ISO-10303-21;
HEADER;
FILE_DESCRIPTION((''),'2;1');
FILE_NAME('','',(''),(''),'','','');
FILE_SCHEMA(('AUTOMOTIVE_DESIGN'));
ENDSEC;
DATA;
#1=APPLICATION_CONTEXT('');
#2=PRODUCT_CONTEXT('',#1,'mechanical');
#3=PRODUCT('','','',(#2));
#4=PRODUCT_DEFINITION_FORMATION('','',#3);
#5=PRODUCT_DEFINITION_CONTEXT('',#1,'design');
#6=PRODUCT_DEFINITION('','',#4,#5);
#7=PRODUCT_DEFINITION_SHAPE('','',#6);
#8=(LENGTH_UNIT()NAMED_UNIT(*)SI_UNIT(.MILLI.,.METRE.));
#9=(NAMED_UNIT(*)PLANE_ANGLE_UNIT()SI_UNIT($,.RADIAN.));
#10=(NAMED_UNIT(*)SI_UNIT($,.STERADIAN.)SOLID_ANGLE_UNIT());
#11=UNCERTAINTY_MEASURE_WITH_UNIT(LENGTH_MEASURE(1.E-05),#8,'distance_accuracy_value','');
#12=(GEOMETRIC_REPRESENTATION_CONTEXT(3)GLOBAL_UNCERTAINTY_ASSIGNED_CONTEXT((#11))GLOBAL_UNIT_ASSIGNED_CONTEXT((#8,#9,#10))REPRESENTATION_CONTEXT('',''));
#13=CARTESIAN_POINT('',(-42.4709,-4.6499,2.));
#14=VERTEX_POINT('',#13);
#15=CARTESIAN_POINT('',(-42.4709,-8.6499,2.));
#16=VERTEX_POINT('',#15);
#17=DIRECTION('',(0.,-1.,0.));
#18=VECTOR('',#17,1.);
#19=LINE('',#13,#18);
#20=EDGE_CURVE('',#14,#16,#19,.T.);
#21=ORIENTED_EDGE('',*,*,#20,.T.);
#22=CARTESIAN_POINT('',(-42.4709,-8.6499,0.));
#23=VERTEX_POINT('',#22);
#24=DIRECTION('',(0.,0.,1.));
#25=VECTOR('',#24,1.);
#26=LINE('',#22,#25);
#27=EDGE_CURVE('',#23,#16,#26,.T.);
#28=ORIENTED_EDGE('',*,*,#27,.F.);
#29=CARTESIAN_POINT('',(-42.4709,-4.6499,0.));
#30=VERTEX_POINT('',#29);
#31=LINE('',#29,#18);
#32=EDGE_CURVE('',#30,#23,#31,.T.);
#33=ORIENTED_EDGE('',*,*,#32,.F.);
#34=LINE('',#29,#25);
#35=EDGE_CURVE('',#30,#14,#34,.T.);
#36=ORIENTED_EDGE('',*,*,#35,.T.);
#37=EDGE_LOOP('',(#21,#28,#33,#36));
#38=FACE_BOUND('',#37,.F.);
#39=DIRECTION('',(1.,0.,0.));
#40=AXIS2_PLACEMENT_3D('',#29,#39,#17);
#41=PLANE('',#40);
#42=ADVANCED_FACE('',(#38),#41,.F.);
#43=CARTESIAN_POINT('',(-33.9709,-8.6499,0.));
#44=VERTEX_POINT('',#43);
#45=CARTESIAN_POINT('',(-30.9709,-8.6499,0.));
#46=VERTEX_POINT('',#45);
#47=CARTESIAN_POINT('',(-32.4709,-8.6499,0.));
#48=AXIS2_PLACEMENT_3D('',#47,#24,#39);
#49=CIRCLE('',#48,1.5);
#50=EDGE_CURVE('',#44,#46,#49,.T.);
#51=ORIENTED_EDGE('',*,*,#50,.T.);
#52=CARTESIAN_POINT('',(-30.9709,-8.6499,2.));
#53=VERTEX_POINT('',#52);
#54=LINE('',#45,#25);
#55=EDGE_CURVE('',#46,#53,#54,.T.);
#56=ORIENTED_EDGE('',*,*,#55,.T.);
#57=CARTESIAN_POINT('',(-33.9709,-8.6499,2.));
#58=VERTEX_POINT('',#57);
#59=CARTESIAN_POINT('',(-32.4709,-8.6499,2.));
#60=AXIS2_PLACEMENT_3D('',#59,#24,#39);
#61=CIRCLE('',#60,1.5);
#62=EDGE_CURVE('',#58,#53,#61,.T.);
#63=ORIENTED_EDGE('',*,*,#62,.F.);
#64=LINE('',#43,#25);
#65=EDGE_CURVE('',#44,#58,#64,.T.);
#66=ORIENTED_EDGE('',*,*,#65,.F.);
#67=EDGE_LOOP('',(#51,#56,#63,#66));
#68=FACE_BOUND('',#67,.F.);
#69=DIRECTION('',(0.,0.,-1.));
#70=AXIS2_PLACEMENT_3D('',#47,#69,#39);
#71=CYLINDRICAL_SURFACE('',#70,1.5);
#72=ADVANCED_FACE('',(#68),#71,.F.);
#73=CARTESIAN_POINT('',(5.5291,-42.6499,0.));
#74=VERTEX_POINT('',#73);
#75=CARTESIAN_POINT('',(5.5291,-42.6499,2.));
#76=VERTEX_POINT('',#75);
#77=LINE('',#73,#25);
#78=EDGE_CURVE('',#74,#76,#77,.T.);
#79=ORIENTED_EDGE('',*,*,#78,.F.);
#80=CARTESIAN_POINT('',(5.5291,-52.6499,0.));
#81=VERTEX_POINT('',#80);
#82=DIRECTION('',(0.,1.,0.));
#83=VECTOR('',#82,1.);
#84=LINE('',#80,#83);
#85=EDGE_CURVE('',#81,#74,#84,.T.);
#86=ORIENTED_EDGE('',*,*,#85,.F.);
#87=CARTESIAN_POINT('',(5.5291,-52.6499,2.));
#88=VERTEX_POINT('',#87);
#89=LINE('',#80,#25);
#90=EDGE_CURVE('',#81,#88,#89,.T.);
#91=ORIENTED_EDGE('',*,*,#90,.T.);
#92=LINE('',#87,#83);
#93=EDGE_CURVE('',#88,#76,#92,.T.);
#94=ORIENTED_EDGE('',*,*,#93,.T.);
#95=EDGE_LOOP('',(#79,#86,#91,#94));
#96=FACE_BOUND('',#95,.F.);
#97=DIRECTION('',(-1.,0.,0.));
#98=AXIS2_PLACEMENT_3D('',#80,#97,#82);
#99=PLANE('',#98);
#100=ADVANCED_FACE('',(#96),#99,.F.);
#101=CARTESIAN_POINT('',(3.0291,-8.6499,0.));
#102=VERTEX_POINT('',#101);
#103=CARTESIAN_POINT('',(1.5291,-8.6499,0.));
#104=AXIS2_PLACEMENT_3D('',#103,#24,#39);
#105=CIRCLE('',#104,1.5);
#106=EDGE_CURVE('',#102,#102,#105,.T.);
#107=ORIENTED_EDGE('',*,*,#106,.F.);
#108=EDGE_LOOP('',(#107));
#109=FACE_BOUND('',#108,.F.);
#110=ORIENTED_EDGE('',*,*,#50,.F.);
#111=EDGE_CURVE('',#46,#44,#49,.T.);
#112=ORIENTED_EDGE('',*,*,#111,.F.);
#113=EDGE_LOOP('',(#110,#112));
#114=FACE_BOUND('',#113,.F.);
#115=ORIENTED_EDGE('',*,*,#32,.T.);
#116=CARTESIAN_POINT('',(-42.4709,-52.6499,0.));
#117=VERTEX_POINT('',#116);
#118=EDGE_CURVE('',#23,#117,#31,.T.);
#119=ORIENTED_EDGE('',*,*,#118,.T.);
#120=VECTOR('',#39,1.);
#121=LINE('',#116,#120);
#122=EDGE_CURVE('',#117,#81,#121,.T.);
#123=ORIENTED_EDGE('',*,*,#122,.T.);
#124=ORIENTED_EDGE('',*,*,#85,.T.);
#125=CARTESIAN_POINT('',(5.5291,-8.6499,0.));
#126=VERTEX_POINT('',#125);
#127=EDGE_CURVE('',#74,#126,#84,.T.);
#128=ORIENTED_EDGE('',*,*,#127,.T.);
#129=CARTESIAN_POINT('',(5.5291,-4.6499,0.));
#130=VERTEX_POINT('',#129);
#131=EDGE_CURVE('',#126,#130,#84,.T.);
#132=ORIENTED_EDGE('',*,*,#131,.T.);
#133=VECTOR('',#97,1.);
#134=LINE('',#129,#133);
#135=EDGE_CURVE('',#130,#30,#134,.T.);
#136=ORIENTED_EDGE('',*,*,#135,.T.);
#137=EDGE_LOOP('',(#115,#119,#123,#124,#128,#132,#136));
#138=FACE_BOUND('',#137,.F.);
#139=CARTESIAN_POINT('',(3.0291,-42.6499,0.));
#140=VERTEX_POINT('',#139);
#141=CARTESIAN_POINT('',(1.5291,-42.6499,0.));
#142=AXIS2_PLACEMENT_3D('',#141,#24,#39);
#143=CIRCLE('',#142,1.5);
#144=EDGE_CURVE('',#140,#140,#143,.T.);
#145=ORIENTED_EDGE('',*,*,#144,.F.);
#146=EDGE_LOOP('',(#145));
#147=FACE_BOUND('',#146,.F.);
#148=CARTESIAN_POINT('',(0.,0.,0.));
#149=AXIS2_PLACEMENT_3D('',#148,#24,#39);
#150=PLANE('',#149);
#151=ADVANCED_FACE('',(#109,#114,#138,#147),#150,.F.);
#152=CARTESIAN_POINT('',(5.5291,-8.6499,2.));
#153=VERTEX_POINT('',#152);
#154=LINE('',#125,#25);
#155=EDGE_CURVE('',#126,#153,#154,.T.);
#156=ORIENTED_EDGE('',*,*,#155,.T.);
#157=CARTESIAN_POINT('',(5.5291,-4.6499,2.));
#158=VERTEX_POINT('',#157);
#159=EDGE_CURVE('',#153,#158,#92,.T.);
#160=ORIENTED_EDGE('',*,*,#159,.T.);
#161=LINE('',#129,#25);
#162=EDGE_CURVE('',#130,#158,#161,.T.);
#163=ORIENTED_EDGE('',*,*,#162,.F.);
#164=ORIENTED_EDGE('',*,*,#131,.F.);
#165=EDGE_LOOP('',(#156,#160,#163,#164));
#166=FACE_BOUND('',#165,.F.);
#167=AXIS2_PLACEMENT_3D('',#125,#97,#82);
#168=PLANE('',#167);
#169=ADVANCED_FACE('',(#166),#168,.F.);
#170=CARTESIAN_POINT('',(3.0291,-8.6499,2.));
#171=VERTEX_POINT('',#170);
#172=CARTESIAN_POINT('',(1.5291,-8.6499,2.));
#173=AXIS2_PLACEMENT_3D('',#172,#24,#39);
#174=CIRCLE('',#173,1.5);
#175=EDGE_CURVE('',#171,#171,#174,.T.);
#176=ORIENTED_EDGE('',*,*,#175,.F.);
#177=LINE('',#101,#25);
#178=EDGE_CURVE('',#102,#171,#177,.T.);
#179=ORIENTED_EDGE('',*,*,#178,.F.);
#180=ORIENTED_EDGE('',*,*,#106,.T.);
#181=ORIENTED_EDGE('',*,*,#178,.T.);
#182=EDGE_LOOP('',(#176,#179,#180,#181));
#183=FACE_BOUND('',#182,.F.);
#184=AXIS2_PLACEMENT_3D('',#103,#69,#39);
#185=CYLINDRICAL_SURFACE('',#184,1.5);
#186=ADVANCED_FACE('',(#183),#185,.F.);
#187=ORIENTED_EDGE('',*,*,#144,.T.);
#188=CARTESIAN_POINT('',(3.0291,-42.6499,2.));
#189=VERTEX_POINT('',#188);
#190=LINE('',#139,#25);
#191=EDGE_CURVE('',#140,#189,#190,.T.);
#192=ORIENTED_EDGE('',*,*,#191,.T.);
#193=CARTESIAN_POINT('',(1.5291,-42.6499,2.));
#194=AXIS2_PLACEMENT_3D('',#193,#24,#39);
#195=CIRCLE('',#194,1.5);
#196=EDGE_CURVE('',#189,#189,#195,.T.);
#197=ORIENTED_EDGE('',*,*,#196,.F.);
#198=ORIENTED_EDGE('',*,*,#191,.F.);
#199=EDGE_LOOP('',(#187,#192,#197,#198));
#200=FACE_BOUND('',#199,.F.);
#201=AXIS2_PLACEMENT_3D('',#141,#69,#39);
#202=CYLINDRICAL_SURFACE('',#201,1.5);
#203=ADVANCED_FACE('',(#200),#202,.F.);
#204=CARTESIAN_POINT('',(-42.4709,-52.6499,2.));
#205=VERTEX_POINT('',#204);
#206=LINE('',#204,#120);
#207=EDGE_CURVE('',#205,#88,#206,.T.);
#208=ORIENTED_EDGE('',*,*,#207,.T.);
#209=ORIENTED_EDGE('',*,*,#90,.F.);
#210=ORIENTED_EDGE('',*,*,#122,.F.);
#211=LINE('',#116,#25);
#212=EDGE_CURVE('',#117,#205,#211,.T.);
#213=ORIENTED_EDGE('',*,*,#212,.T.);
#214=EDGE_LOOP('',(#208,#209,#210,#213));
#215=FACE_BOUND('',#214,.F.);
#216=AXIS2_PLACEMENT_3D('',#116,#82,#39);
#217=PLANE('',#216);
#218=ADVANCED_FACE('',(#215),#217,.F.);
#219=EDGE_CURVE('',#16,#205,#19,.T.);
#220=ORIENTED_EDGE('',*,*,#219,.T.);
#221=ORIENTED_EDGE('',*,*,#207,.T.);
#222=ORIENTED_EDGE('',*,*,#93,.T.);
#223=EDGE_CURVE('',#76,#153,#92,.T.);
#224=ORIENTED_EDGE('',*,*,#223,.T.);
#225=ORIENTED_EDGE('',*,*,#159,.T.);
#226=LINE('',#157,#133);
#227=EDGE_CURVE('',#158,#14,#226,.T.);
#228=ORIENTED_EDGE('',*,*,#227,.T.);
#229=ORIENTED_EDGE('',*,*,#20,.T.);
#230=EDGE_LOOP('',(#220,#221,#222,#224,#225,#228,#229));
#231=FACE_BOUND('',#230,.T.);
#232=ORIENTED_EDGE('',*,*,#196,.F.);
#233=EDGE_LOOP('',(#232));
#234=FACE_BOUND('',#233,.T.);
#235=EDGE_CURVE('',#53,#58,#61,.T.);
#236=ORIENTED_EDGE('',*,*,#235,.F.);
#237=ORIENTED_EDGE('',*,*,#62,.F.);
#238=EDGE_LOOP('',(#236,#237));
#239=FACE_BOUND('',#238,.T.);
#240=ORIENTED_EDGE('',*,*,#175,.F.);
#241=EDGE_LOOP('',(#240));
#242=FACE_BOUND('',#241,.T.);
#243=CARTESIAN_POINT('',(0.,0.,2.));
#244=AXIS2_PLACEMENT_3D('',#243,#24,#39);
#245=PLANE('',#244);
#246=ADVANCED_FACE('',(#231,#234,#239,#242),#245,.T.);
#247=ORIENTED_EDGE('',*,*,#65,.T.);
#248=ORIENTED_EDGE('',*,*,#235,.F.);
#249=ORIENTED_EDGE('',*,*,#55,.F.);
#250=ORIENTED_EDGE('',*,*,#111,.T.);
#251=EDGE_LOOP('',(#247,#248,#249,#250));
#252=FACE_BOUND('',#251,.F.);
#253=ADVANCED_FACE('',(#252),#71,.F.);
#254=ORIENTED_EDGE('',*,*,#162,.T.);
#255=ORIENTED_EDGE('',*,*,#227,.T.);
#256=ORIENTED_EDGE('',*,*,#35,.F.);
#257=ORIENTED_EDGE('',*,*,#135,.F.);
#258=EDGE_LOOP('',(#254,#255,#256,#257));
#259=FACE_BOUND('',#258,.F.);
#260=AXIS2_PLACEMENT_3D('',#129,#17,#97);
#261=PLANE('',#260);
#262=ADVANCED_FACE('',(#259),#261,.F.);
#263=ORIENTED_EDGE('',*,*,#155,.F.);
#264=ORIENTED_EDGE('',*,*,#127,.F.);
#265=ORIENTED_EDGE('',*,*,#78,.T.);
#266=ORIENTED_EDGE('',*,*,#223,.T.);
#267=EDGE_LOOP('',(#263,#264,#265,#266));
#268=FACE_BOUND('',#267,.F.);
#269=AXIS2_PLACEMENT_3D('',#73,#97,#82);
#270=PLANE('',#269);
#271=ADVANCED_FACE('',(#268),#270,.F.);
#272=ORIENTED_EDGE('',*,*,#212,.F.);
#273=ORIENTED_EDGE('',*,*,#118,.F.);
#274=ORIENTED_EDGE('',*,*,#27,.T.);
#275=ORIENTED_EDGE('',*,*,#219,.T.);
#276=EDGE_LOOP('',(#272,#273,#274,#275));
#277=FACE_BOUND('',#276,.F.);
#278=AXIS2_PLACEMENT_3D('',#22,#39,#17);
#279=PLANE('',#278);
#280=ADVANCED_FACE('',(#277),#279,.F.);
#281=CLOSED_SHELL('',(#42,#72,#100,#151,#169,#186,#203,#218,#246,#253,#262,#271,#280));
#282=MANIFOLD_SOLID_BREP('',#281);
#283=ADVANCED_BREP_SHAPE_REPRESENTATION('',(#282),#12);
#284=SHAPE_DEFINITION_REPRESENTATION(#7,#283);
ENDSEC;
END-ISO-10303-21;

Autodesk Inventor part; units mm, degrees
ref_plane "YZ Plane" through (0, 0, 0) normal (1, 0, 0) x (0, 1, 0)
ref_plane "XZ Plane" through (0, 0, 0) normal (0, 1, 0) x (-1, 0, 0)
ref_plane "XY Plane" through (0, 0, 0) normal (0, 0, 1) x (1, 0, 0)
sketch "Sketch1" plane through (0, 0, 0) normal (0, 0, 1) x (1, 0, 0)
  line L0 (5.5291, -4.6499) -> (-42.4709, -4.6499)
  line L1 (-42.4709, -4.6499) -> (-42.4709, -52.6499)
  line L2 (-42.4709, -52.6499) -> (5.5291, -52.6499)
  line L3 (5.5291, -52.6499) -> (5.5291, -4.6499)
  line L4 (5.5291, -4.6499) -> (5.5291, -8.6499)
  line L5 (5.5291, -8.6499) -> (1.5291, -8.6499)
  circle A0 centre (1.5291, -8.6499) radius 1.5
  line L6 (-42.4709, -4.6499) -> (-42.4709, -8.6499)
  line L7 (-42.4709, -8.6499) -> (-32.4709, -8.6499)
  circle A1 centre (-32.4709, -8.6499) radius 1.5
  line L8 (5.5291, -52.6499) -> (5.5291, -42.6499)
  line L9 (5.5291, -42.6499) -> (1.5291, -42.6499)
  circle A2 centre (1.5291, -42.6499) radius 1.5
  point P0 (0, 0)
  dimension "d0" = 48
  dimension "d1" = 48
  dimension "d2" = 4
  dimension "d3" = 4
  dimension "d4" = 3
  dimension "d5" = 4
  dimension "d6" = 10
  dimension "d7" = 3
  dimension "d8" = 10
  dimension "d9" = 4
  dimension "d10" = 3
extrude "Extrusion1" add sketch "Sketch1" along normal blind 2
properties part number "contorller kort"
